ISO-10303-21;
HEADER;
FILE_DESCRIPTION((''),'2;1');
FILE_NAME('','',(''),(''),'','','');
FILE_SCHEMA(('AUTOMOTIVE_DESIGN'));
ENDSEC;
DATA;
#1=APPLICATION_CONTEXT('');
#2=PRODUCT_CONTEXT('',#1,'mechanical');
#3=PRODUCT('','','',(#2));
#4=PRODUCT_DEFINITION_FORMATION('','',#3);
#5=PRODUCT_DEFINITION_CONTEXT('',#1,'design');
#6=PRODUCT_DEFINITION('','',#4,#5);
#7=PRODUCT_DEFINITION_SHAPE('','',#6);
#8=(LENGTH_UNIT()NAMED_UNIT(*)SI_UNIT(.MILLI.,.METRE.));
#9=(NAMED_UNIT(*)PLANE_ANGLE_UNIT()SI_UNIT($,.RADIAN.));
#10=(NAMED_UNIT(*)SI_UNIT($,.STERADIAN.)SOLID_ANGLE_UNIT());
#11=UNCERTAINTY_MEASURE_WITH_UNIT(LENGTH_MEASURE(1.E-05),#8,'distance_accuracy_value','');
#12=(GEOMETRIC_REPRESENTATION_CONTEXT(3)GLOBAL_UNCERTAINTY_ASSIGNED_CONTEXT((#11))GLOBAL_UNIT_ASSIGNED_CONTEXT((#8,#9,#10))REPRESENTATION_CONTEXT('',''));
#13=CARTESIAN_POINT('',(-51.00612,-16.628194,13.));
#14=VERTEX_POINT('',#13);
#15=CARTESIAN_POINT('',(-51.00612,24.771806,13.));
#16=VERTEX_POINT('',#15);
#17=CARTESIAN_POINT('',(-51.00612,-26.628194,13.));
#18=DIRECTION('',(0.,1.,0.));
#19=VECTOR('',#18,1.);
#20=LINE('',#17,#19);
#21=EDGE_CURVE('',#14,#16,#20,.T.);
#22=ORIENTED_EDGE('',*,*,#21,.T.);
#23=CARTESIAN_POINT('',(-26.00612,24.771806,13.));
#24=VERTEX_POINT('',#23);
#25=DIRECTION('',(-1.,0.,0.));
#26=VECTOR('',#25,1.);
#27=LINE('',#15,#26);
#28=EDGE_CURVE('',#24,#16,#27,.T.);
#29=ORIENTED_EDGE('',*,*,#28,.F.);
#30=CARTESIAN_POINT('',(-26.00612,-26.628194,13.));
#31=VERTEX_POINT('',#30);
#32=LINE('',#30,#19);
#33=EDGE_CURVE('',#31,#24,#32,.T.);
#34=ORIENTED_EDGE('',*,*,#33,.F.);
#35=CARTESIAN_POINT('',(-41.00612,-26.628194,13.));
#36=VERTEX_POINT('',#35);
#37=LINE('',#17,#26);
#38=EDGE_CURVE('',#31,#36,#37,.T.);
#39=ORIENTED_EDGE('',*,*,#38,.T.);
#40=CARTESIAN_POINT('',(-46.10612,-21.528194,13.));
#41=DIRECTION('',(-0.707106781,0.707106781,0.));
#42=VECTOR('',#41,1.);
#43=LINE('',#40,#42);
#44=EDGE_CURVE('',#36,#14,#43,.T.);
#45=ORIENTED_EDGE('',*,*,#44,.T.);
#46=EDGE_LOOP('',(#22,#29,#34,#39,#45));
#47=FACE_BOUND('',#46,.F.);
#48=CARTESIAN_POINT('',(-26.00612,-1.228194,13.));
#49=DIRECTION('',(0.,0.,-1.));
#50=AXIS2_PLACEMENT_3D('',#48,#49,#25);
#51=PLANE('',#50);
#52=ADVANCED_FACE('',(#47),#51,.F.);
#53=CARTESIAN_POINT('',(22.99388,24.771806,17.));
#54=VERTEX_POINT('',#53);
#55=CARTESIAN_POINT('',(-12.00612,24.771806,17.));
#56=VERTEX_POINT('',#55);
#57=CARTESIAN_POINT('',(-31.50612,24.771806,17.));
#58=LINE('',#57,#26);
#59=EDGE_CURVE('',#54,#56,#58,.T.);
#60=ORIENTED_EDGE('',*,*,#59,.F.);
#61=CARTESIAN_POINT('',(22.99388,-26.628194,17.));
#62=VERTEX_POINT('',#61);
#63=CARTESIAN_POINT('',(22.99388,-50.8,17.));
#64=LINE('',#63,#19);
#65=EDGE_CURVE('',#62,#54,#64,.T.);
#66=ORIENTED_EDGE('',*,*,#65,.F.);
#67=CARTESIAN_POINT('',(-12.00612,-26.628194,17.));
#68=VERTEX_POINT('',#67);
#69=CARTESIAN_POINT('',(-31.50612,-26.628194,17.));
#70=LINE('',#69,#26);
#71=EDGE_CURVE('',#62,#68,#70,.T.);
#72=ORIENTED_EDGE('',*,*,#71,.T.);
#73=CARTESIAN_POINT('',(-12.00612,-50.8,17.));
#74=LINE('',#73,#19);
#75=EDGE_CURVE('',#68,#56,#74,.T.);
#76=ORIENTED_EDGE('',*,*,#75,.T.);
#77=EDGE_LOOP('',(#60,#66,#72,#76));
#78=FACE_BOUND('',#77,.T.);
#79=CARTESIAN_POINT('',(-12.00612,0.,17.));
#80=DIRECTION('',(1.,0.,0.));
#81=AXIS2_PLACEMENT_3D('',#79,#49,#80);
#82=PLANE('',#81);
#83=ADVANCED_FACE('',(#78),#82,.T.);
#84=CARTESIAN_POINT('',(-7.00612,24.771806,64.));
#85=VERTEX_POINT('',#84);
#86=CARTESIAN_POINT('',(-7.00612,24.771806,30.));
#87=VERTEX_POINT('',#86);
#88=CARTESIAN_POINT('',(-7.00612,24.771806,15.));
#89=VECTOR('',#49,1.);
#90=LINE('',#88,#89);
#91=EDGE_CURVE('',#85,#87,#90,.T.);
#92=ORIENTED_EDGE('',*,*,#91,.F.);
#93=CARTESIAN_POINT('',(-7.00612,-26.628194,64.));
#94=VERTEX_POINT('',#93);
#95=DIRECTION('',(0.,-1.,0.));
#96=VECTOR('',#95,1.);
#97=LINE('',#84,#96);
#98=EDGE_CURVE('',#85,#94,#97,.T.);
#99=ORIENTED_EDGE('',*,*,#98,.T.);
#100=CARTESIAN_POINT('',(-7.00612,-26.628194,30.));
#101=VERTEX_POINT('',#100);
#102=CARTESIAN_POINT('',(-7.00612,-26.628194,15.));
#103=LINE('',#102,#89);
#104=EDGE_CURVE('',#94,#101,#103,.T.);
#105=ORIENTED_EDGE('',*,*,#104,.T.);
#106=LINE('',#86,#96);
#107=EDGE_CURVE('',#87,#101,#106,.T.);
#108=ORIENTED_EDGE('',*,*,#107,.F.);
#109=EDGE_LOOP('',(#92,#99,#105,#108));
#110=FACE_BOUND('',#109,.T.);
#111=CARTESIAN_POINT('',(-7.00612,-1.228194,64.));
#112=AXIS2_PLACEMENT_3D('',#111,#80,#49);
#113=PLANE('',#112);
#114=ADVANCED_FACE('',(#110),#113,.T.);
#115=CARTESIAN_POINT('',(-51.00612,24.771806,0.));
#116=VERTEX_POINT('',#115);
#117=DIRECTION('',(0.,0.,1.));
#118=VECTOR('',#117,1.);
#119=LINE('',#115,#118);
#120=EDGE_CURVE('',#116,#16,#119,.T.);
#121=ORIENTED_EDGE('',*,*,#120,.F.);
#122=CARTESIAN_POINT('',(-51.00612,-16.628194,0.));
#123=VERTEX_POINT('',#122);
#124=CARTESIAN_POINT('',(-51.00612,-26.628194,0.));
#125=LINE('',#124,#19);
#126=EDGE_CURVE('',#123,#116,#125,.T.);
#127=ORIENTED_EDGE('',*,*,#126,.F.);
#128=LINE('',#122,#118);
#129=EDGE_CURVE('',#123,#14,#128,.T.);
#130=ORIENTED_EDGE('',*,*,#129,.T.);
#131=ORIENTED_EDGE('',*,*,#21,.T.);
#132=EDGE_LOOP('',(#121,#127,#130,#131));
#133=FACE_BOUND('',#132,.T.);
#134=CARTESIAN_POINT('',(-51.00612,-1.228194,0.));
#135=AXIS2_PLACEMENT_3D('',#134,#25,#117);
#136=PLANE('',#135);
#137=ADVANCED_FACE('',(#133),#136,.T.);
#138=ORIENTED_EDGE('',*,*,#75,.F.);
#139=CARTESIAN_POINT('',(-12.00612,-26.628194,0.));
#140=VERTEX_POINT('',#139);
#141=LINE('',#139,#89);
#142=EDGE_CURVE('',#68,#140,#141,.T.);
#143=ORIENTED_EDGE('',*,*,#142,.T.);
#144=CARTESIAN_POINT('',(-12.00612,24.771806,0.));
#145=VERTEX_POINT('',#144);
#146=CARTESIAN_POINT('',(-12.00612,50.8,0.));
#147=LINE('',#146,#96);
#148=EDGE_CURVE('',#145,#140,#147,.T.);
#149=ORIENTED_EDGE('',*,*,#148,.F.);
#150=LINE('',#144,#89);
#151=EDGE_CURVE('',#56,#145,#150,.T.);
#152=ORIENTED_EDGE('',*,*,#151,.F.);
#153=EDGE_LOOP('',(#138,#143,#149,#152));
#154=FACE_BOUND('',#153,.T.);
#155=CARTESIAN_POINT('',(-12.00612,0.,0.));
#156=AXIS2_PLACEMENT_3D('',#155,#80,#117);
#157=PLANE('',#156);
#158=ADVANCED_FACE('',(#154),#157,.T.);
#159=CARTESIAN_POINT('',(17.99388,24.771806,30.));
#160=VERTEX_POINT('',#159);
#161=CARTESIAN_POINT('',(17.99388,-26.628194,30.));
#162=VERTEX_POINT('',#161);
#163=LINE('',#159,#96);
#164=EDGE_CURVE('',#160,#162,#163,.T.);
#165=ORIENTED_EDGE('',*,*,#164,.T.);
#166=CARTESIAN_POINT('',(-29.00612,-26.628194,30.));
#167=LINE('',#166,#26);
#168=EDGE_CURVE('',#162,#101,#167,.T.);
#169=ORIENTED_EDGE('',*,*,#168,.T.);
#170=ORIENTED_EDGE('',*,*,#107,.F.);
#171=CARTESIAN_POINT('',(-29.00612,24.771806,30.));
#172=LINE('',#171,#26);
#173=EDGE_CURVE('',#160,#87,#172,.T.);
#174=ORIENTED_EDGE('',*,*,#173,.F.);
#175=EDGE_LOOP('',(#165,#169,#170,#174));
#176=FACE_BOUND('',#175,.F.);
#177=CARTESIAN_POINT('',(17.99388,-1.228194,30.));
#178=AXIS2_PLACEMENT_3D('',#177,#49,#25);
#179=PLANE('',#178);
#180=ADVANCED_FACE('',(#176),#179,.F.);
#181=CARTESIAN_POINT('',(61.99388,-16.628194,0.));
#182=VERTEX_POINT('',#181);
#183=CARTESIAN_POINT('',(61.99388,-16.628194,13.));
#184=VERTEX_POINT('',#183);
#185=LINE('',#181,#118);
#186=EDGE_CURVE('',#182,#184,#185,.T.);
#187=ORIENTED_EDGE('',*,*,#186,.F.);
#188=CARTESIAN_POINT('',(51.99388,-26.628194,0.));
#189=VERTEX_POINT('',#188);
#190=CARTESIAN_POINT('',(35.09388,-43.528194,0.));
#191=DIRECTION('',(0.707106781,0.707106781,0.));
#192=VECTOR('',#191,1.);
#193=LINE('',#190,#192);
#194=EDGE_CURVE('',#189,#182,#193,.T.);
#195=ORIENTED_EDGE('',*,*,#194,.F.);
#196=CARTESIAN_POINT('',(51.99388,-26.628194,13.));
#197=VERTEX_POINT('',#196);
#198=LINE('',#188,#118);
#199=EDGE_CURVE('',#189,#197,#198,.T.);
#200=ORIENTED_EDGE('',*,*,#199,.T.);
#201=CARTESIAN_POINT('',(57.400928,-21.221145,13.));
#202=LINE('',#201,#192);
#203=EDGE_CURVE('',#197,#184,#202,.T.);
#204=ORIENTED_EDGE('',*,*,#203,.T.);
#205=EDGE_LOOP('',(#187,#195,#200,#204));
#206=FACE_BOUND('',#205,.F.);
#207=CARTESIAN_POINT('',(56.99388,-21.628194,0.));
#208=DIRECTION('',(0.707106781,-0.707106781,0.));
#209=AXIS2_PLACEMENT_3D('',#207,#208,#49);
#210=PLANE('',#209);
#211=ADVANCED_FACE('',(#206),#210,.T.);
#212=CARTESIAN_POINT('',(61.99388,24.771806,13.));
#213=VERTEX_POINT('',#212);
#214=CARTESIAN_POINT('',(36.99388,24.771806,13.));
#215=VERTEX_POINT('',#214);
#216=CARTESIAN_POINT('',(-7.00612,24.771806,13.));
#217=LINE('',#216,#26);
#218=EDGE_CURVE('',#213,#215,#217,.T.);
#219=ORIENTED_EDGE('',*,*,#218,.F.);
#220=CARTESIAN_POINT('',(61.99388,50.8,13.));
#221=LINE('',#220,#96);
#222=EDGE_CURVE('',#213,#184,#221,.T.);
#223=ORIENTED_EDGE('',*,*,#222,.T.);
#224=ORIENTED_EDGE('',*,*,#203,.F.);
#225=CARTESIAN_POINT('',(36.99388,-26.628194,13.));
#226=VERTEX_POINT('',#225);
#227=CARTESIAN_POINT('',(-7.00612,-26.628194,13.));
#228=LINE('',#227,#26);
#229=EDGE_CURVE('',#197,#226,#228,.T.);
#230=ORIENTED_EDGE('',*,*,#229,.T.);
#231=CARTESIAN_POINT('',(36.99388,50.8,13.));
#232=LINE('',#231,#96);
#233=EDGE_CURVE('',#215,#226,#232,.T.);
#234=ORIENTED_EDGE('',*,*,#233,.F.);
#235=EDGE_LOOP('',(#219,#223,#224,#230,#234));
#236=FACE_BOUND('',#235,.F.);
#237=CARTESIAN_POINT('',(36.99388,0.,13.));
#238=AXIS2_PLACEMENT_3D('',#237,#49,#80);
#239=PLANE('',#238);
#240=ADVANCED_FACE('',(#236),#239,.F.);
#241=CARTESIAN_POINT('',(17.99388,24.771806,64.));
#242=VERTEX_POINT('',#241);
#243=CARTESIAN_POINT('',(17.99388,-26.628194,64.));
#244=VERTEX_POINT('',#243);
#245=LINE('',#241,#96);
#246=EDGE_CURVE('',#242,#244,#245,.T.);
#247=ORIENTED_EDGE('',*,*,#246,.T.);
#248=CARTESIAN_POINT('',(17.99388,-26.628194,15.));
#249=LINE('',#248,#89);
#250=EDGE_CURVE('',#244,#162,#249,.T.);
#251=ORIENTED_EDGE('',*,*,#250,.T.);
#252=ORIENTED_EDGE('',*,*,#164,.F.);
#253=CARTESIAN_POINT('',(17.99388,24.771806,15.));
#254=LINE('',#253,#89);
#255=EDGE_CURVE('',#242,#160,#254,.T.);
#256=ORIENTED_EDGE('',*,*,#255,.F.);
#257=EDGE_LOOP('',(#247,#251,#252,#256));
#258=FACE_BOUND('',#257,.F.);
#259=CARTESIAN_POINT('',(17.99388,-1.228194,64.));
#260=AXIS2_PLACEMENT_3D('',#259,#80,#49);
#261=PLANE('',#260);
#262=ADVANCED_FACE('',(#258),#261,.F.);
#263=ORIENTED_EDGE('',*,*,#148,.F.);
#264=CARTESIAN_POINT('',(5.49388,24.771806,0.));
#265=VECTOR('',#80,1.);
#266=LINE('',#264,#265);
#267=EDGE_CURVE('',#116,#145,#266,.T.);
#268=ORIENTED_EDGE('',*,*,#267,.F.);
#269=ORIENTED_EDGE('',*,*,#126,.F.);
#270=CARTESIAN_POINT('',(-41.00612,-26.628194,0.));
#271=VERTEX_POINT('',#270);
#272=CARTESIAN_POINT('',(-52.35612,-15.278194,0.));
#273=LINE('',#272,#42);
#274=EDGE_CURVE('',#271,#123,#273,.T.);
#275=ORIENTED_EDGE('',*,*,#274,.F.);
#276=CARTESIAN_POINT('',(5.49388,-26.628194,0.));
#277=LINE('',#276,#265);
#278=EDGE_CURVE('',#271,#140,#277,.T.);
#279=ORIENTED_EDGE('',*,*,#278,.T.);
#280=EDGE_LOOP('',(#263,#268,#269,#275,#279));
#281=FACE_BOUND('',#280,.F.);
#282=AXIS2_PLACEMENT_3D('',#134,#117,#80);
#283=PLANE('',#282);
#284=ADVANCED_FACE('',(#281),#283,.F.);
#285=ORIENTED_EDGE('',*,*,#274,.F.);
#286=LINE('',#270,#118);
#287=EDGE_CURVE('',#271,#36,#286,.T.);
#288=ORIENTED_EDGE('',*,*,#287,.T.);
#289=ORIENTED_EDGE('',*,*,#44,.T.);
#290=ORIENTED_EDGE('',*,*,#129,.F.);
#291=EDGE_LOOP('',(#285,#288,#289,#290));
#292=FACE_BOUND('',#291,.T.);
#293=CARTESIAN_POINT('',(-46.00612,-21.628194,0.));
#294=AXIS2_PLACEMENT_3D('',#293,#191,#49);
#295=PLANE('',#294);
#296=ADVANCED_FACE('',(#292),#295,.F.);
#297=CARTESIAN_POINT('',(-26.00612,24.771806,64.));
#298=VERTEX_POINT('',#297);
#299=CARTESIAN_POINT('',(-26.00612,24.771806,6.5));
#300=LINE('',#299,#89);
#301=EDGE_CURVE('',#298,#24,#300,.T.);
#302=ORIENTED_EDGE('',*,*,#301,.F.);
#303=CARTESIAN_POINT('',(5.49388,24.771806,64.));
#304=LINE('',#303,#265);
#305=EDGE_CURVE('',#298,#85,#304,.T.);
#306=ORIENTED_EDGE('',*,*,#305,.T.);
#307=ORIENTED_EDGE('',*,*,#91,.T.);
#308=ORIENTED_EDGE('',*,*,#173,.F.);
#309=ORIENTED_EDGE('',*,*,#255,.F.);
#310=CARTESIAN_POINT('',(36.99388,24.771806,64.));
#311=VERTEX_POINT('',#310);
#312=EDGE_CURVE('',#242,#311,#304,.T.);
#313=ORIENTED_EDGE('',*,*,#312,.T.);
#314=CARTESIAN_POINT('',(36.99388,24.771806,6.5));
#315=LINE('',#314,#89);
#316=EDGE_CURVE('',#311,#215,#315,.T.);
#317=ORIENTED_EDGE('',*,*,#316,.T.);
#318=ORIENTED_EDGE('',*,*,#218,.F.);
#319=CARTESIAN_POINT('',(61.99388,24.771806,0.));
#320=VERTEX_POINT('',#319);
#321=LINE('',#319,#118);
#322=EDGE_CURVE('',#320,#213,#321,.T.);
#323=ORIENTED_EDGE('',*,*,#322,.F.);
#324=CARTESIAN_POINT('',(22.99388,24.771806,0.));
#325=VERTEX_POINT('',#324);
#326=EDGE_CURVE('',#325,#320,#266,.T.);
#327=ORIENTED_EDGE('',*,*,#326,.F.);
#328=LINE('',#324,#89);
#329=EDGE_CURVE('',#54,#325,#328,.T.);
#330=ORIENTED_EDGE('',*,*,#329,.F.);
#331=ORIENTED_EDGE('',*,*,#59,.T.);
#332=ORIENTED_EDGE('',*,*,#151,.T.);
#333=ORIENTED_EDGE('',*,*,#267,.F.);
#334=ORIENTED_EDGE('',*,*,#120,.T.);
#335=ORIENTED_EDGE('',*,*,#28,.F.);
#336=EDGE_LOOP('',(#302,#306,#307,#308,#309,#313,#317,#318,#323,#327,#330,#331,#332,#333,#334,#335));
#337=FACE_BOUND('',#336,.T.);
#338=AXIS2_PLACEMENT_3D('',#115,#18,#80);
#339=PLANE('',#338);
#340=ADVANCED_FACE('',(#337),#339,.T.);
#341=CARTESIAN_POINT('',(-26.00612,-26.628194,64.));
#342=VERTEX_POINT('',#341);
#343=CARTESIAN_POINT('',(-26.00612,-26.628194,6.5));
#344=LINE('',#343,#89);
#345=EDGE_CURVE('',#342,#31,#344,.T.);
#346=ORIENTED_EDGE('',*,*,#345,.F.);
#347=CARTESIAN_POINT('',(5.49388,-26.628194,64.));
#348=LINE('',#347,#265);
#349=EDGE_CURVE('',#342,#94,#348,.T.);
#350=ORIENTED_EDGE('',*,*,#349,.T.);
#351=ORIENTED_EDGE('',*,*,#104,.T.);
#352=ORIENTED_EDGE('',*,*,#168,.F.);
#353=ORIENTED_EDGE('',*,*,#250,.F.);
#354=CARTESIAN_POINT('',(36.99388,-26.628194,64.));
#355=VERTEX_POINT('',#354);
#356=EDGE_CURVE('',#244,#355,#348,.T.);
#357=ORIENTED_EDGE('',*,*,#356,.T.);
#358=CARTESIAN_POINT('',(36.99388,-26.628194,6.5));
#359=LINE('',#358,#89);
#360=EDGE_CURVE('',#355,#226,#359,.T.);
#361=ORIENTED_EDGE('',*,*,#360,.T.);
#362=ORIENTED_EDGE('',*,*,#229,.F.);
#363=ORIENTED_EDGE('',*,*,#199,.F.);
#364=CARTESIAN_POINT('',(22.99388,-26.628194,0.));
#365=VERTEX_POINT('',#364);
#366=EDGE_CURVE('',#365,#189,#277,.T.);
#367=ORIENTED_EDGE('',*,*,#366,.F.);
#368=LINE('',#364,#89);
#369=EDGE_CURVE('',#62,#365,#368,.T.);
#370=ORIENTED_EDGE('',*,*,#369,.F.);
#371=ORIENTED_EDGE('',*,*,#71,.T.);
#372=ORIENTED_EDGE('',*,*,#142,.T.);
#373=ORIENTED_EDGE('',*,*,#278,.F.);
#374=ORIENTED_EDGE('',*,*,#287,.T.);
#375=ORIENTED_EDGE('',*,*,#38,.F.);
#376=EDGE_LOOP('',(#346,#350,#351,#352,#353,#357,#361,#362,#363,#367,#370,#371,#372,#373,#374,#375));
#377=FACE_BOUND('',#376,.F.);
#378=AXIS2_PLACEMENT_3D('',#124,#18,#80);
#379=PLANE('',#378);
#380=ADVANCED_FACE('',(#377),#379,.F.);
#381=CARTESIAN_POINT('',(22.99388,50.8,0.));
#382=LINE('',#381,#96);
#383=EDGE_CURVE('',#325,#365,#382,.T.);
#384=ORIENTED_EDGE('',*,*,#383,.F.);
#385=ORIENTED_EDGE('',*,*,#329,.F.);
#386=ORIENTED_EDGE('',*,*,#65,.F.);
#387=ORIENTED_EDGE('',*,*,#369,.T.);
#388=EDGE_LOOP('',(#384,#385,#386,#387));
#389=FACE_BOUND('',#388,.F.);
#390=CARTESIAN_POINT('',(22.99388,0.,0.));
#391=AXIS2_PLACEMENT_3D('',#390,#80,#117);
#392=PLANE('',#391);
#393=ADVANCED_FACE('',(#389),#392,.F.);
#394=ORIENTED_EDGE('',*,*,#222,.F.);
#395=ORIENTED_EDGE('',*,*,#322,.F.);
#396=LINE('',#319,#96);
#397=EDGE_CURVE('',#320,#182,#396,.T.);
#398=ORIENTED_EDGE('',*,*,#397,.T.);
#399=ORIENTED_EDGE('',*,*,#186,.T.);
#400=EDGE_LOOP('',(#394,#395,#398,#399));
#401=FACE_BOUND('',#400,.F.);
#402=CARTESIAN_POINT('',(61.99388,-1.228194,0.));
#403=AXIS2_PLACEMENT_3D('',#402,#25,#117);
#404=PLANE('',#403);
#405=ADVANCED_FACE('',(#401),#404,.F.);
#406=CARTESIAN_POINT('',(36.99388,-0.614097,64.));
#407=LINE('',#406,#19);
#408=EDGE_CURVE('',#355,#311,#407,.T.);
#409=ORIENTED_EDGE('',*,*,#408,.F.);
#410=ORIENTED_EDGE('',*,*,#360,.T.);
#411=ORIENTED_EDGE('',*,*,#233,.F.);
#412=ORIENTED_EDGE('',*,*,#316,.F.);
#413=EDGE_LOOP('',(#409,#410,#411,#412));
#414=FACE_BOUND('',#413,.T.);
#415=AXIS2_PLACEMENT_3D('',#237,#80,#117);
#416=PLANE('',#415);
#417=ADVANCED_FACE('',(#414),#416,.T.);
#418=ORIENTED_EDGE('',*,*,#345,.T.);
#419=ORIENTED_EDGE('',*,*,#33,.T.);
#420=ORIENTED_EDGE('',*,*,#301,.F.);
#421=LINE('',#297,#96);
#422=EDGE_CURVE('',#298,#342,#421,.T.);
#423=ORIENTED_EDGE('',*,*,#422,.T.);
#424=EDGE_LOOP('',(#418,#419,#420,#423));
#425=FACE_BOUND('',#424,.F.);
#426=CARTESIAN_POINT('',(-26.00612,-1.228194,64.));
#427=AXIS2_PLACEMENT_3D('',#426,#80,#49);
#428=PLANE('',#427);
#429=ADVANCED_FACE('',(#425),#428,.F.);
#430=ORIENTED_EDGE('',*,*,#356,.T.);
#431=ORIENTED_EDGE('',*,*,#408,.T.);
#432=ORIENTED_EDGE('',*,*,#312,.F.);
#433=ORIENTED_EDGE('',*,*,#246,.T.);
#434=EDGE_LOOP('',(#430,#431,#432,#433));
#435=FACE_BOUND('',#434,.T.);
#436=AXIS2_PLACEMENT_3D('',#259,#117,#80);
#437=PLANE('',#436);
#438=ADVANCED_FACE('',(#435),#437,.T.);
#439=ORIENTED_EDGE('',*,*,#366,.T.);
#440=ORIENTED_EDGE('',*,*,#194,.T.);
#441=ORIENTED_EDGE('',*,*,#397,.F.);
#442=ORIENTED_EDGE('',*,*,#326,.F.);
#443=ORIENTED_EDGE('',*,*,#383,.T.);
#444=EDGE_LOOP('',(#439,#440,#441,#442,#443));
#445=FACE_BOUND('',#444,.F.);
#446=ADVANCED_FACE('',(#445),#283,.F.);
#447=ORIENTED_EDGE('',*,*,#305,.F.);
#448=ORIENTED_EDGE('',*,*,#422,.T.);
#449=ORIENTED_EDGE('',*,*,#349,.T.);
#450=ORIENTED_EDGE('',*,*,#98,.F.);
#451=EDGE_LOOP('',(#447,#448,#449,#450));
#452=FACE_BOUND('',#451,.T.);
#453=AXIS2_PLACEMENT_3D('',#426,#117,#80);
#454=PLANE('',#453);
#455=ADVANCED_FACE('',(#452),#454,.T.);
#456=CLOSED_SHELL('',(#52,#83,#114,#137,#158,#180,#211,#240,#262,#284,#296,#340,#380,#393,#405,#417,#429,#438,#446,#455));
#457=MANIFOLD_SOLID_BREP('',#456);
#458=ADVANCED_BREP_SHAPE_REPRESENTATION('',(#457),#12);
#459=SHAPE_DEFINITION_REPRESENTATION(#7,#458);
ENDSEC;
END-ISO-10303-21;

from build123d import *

# Parameters (mm, degrees)
F0_W      = 113
F0_H      = 26
F1_DEPTH  = 64
F2_W      = 25
F2_H      = 36.5019804899
F3_DEPTH  = 50.8
F4_W      = 25
F4_H      = 65.5092679775
F5_DEPTH  = 50.8
F6_DEPTH  = 25.4
F7_W      = 25
F7_H      = 54.8469666392
F8_DEPTH  = 50.8
F9_W      = 35
F9_H      = 17
F10_DEPTH = 50.8
F11_SIZE  = 10
F12_SIZE  = 10


# Not quite as in the source:
# - a feature of the source that left no trace in its solid (it failed there, or was rolled back) is left out


with BuildPart() as f1:
    # F0 (on Top) → F1 (new body)
    with BuildSketch(Plane.XY):
        with Locations((5.4938797247, 11.7718060501)):
            Rectangle(F0_W, F0_H)
    extrude(amount=F1_DEPTH)

    # F2 (on Front) → F3 (cut, symmetric)
    with BuildSketch(Plane.XZ):
        with Locations((5.4938797247, 48.2509902449)):
            Rectangle(F2_W, F2_H)
    extrude(amount=F3_DEPTH, both=True, mode=Mode.SUBTRACT)

    # F4 (on Front) → F5 (cut, symmetric)
    with BuildSketch(Plane.XZ):
        with Locations((-38.5061202753, 45.7546339888)):
            Rectangle(F4_W, F4_H)
    extrude(amount=F5_DEPTH, both=True, mode=Mode.SUBTRACT)

    # F6 (add): faces of the model
    f6_faces = [f1.faces().sort_by_distance(p)[0] for p in [
        (16.4788023799, -1.2281939499, 27.8806540043),
        (16.4788023799, 24.7718060501, 27.8806540043),
    ]]
    extrude(f6_faces, amount=F6_DEPTH, dir=(0, -1, 0))

    # F7 (on Front) → F8 (cut, symmetric)
    with BuildSketch(Plane.XZ):
        with Locations((49.4938797247, 40.4234833196)):
            Rectangle(F7_W, F7_H)
    extrude(amount=F8_DEPTH, both=True, mode=Mode.SUBTRACT)

    # F9 (on Front) → F10 (cut, symmetric)
    with BuildSketch(Plane.XZ):
        with Locations((5.4938797247, 8.5)):
            Rectangle(F9_W, F9_H)
    extrude(amount=F10_DEPTH, both=True, mode=Mode.SUBTRACT)

    # F11
    f11_edges = [f1.edges().sort_by_distance(p)[0] for p in [
        (61.99388, -26.628194, 6.5),
    ]]
    chamfer(f11_edges, length=F11_SIZE)

    # F12
    f12_edges = [f1.edges().sort_by_distance(p)[0] for p in [
        (-51.00612, -26.628194, 6.5),
    ]]
    chamfer(f12_edges, length=F12_SIZE)


solid = f1.part
